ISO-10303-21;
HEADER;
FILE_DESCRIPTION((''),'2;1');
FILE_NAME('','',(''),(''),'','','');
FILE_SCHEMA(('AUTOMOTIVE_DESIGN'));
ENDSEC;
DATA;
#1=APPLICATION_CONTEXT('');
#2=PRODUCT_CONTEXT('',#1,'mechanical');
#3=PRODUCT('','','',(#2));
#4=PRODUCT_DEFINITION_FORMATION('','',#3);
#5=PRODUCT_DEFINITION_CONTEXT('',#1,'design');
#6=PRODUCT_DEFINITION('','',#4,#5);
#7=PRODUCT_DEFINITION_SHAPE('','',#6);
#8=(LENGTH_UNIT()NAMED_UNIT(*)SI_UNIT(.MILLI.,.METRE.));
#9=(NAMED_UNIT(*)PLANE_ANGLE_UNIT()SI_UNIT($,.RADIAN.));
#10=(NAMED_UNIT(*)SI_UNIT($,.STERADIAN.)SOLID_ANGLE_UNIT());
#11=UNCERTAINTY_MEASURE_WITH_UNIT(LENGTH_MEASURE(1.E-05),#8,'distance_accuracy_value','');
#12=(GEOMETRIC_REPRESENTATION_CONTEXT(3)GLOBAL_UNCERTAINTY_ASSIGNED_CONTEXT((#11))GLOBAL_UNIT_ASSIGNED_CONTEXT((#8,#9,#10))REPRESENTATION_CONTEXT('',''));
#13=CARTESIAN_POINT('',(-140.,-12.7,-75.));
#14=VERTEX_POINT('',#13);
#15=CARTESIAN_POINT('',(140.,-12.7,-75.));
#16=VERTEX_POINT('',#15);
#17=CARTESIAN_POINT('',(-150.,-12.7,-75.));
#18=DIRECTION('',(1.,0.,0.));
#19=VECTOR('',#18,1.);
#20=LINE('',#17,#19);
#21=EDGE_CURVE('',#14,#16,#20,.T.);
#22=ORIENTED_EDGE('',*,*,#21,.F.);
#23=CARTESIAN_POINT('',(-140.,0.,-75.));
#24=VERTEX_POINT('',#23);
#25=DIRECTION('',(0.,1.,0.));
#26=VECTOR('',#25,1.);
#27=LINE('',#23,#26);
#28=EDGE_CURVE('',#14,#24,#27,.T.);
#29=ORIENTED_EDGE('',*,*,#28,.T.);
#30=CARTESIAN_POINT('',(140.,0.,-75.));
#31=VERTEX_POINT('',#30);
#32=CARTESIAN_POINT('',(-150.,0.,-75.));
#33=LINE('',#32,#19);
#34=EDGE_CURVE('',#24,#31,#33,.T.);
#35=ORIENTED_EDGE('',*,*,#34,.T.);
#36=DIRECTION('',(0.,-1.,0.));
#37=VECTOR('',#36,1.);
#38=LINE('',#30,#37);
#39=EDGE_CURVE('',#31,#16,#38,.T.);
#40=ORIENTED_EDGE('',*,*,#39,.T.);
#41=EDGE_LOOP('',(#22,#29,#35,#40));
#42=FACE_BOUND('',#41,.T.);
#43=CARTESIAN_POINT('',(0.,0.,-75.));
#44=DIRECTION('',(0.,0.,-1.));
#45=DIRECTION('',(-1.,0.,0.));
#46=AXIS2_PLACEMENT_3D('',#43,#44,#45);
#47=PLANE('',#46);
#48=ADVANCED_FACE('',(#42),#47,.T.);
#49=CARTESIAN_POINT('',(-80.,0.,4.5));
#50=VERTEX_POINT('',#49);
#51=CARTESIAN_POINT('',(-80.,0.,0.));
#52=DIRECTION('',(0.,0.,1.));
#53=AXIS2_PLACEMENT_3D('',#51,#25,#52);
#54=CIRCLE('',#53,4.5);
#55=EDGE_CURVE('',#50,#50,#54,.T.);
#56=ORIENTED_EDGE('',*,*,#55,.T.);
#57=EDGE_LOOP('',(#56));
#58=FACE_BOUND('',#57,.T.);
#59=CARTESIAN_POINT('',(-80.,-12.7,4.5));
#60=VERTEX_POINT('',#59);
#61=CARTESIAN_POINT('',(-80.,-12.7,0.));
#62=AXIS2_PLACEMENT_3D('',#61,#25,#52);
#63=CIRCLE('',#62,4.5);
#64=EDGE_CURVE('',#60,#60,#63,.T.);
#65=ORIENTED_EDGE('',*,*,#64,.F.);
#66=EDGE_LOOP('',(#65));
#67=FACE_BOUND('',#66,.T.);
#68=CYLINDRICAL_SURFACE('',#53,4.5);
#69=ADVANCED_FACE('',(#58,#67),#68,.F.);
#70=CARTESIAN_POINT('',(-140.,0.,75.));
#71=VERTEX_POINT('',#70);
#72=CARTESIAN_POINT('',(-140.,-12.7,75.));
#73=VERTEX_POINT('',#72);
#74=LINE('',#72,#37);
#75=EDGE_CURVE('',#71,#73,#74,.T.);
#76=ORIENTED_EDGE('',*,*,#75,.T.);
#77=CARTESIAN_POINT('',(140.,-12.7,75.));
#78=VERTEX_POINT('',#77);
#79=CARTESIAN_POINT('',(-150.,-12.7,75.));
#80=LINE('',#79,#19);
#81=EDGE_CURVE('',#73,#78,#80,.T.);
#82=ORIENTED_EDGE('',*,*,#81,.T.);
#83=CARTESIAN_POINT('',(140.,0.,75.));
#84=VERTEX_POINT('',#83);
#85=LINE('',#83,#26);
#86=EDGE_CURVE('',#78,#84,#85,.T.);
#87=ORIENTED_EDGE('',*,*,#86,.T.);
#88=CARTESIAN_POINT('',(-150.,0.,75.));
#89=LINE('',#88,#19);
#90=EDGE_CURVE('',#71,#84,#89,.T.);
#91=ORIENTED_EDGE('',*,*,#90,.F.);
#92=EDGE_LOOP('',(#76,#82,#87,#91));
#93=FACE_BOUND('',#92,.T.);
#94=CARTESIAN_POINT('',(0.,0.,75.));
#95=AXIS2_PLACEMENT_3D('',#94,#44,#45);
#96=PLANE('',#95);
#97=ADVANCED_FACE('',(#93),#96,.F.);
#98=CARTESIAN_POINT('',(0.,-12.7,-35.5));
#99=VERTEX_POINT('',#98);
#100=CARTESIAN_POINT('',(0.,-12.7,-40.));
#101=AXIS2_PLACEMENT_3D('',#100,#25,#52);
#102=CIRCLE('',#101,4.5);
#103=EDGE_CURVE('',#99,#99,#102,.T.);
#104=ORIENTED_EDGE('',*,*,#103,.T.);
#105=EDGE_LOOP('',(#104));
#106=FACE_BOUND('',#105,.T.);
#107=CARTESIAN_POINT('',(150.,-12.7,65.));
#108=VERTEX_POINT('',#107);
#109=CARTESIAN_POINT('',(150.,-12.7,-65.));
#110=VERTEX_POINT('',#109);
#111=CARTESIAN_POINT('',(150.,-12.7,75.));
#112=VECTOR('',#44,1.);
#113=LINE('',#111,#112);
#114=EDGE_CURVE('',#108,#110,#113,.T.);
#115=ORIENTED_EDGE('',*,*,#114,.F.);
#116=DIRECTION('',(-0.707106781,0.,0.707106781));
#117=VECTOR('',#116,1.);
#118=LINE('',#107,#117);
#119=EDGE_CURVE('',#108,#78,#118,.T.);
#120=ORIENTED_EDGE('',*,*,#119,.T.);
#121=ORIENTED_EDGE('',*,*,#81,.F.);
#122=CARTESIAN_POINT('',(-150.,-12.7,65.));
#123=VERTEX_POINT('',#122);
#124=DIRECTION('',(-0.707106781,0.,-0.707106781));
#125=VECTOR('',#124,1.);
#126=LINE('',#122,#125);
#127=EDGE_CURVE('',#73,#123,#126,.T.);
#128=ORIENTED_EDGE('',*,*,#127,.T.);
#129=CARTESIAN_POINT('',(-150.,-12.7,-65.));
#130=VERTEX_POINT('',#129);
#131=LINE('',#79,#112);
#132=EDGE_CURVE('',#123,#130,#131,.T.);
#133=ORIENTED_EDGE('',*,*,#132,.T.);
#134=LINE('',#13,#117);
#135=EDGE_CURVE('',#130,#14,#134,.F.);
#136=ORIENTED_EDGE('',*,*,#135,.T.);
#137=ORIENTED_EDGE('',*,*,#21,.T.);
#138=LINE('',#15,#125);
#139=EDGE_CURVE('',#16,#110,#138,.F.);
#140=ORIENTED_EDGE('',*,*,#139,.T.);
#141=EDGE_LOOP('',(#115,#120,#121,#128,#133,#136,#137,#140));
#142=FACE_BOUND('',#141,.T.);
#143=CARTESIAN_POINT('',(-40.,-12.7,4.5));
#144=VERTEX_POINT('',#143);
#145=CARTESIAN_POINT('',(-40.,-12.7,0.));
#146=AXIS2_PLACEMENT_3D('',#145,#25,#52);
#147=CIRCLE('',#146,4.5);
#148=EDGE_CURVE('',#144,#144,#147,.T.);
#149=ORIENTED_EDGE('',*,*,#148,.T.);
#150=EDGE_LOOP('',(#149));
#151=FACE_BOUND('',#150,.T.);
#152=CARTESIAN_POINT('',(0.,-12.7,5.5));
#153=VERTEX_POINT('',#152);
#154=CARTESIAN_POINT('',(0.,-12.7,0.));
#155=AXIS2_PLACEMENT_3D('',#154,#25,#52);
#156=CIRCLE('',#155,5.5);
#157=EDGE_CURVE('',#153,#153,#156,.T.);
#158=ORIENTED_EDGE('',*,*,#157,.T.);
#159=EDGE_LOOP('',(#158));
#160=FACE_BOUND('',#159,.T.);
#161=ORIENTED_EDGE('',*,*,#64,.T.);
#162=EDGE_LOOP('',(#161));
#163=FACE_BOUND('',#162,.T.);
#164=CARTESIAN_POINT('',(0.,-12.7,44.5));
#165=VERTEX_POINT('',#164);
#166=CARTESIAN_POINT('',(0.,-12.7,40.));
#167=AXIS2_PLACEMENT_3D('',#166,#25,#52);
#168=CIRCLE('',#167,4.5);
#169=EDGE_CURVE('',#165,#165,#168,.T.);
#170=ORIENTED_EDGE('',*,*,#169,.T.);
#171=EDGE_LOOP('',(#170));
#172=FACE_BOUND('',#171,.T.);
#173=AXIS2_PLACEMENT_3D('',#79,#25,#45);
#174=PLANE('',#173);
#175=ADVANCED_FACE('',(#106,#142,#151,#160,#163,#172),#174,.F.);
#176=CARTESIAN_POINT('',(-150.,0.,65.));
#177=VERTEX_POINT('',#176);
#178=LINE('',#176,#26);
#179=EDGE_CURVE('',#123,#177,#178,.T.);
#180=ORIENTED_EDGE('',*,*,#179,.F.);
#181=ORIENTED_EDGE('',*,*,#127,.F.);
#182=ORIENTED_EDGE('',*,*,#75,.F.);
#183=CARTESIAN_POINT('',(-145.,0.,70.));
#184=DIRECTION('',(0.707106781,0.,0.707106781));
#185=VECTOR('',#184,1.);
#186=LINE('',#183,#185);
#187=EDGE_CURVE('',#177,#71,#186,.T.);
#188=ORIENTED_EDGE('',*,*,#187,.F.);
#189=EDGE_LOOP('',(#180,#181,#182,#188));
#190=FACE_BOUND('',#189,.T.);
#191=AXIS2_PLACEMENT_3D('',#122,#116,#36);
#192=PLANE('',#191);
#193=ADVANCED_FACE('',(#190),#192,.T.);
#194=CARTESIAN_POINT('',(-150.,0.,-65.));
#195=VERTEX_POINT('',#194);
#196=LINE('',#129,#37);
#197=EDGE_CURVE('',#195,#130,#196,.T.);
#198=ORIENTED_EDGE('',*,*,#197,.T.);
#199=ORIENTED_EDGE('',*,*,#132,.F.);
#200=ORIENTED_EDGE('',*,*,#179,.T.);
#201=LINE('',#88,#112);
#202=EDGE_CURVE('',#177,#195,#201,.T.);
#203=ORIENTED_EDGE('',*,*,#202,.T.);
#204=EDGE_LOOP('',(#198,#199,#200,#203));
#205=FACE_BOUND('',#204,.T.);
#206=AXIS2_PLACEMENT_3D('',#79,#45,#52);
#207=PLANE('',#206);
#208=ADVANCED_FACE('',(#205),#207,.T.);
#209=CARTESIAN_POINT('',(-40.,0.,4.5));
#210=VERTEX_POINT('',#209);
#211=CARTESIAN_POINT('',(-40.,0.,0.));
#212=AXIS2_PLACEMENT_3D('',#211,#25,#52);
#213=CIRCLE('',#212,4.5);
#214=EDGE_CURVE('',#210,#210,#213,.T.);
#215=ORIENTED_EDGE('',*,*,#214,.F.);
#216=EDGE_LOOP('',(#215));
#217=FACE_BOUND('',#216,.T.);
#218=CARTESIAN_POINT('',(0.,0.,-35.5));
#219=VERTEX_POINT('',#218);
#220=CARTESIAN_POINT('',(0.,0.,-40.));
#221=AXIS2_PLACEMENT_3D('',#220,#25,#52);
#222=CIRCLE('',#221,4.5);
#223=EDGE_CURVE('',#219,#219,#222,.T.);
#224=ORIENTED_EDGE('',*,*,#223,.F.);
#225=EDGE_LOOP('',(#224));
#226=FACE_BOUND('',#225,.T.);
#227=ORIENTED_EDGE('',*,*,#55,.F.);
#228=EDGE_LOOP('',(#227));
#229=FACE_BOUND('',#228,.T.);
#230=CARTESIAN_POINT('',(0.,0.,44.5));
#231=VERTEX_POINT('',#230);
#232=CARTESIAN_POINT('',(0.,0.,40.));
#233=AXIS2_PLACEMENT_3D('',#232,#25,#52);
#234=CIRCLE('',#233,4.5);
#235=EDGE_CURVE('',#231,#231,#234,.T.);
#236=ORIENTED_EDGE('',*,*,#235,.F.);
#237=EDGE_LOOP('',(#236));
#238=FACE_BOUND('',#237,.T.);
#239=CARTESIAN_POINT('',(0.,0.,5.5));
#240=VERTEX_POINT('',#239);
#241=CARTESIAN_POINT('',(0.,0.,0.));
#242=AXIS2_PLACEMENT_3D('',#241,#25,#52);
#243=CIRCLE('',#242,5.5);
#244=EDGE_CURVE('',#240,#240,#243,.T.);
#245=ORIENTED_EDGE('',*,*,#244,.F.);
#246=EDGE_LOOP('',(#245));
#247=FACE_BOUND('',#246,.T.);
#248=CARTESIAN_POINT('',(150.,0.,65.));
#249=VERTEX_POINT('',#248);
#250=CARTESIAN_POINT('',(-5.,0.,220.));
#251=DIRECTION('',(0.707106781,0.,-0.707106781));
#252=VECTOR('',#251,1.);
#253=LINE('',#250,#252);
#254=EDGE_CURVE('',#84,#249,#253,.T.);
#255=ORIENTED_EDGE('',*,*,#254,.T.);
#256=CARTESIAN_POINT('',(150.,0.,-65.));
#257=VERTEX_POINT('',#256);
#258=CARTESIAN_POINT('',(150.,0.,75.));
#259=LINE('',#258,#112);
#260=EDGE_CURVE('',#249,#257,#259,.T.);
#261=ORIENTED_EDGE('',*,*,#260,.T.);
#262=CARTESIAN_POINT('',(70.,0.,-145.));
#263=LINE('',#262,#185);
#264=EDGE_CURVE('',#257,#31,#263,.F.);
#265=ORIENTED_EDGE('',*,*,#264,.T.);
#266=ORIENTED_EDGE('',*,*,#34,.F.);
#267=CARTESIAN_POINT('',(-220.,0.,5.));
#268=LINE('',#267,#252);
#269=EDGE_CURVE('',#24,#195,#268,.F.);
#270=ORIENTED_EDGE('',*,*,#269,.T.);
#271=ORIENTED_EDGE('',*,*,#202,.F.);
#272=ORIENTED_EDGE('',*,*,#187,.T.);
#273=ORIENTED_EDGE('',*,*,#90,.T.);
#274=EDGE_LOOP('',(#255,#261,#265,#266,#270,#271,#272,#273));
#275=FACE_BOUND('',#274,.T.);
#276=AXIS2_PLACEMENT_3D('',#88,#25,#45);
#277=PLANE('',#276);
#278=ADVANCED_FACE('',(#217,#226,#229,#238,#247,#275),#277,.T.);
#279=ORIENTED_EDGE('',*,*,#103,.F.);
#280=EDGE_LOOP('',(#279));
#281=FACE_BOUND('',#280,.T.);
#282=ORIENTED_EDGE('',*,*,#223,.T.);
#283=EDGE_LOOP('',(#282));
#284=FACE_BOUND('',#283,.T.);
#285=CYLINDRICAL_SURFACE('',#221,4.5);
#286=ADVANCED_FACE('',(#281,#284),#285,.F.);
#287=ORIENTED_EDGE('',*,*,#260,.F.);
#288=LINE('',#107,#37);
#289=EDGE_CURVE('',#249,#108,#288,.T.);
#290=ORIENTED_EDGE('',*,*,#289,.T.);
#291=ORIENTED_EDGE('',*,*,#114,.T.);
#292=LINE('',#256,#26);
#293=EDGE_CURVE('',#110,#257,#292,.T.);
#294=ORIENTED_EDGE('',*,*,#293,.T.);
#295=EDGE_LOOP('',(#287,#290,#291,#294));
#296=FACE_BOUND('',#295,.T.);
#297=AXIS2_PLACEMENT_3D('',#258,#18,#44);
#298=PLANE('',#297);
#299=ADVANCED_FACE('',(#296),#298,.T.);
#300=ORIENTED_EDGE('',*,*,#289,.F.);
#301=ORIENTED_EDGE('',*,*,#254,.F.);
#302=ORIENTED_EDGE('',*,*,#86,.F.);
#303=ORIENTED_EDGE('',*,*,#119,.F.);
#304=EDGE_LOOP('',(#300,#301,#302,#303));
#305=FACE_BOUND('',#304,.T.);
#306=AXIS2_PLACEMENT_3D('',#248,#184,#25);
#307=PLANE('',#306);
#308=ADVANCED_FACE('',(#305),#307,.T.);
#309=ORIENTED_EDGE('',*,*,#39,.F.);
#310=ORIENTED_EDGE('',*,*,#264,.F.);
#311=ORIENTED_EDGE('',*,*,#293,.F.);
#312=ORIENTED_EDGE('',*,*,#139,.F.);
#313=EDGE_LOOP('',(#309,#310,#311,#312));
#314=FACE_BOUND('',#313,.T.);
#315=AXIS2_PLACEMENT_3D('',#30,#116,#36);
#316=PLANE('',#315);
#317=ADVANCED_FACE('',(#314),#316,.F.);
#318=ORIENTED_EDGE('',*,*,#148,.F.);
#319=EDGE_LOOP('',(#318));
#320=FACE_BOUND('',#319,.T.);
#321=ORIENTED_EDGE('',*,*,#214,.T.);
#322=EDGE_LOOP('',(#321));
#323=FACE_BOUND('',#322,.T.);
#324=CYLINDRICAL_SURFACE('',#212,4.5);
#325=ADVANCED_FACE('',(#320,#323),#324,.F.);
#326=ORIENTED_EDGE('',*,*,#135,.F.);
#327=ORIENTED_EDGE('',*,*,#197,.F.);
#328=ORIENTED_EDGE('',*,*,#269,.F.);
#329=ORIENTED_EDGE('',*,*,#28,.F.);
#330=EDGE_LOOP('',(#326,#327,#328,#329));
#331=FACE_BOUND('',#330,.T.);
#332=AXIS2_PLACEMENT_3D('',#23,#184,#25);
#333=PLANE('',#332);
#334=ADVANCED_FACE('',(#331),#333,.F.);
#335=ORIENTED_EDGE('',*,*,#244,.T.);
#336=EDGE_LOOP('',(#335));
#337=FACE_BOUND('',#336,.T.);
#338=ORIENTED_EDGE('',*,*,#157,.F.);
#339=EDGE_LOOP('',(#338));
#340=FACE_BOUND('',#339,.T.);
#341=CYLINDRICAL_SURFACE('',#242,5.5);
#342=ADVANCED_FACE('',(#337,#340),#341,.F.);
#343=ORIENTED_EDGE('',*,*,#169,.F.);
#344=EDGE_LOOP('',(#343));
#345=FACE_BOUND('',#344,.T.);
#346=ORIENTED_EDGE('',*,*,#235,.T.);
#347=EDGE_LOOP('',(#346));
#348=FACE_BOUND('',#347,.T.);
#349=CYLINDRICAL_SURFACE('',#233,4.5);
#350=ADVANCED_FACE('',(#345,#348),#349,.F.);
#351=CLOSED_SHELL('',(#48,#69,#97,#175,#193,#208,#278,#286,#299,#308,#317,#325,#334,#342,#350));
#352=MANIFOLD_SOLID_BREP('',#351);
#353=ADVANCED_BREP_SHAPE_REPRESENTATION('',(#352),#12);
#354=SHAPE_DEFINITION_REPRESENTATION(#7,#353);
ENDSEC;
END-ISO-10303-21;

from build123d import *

# Parameters (mm, degrees)
BASE_FLANGE1_START     = -75
BASE_FLANGE1_OUTLINE_W = 300
BASE_FLANGE1_OUTLINE_H = 12.7
BASE_FLANGE1_DEPTH     = 150
M10_CLEARANCE_HOLE1_D  = 11
M8_CLEARANCE_HOLE1_D   = 9
CHAMFER1_SIZE          = 10


# Read off the part's stored shape, not the designer's step: Base-Flange1
with BuildPart() as part:
    # Base-Flange1 outline → Base-Flange1 (new body)
    with BuildSketch(Plane.XY.offset(BASE_FLANGE1_START)):
        with Locations((0, -6.35)):
            Rectangle(BASE_FLANGE1_OUTLINE_W, BASE_FLANGE1_OUTLINE_H)
    extrude(amount=BASE_FLANGE1_DEPTH)

    # M10 Clearance Hole1 (through all)
    with Locations(Plane(origin=(0, 0, 0), x_dir=(1, 0, 0), z_dir=(0, 1, 0))):
        with Locations((0, 0)):
            Hole(M10_CLEARANCE_HOLE1_D / 2)

    # M8 Clearance Hole1 (through all)
    with Locations(Plane(origin=(0, 0, 0), x_dir=(1, 0, 0), z_dir=(0, 1, 0))):
        with Locations((-40, 0), (0, -40), (0, 40), (-80, 0)):
            Hole(M8_CLEARANCE_HOLE1_D / 2)

    # Chamfer1
    chamfer1_edges = [part.edges().sort_by_distance(p)[0] for p in [
        (-150, -6.35, 75),
        (-150, -6.35, -75),
        (150, -6.35, -75),
        (150, -6.35, 75),
    ]]
    chamfer(chamfer1_edges, length=CHAMFER1_SIZE)


solid = part.part
